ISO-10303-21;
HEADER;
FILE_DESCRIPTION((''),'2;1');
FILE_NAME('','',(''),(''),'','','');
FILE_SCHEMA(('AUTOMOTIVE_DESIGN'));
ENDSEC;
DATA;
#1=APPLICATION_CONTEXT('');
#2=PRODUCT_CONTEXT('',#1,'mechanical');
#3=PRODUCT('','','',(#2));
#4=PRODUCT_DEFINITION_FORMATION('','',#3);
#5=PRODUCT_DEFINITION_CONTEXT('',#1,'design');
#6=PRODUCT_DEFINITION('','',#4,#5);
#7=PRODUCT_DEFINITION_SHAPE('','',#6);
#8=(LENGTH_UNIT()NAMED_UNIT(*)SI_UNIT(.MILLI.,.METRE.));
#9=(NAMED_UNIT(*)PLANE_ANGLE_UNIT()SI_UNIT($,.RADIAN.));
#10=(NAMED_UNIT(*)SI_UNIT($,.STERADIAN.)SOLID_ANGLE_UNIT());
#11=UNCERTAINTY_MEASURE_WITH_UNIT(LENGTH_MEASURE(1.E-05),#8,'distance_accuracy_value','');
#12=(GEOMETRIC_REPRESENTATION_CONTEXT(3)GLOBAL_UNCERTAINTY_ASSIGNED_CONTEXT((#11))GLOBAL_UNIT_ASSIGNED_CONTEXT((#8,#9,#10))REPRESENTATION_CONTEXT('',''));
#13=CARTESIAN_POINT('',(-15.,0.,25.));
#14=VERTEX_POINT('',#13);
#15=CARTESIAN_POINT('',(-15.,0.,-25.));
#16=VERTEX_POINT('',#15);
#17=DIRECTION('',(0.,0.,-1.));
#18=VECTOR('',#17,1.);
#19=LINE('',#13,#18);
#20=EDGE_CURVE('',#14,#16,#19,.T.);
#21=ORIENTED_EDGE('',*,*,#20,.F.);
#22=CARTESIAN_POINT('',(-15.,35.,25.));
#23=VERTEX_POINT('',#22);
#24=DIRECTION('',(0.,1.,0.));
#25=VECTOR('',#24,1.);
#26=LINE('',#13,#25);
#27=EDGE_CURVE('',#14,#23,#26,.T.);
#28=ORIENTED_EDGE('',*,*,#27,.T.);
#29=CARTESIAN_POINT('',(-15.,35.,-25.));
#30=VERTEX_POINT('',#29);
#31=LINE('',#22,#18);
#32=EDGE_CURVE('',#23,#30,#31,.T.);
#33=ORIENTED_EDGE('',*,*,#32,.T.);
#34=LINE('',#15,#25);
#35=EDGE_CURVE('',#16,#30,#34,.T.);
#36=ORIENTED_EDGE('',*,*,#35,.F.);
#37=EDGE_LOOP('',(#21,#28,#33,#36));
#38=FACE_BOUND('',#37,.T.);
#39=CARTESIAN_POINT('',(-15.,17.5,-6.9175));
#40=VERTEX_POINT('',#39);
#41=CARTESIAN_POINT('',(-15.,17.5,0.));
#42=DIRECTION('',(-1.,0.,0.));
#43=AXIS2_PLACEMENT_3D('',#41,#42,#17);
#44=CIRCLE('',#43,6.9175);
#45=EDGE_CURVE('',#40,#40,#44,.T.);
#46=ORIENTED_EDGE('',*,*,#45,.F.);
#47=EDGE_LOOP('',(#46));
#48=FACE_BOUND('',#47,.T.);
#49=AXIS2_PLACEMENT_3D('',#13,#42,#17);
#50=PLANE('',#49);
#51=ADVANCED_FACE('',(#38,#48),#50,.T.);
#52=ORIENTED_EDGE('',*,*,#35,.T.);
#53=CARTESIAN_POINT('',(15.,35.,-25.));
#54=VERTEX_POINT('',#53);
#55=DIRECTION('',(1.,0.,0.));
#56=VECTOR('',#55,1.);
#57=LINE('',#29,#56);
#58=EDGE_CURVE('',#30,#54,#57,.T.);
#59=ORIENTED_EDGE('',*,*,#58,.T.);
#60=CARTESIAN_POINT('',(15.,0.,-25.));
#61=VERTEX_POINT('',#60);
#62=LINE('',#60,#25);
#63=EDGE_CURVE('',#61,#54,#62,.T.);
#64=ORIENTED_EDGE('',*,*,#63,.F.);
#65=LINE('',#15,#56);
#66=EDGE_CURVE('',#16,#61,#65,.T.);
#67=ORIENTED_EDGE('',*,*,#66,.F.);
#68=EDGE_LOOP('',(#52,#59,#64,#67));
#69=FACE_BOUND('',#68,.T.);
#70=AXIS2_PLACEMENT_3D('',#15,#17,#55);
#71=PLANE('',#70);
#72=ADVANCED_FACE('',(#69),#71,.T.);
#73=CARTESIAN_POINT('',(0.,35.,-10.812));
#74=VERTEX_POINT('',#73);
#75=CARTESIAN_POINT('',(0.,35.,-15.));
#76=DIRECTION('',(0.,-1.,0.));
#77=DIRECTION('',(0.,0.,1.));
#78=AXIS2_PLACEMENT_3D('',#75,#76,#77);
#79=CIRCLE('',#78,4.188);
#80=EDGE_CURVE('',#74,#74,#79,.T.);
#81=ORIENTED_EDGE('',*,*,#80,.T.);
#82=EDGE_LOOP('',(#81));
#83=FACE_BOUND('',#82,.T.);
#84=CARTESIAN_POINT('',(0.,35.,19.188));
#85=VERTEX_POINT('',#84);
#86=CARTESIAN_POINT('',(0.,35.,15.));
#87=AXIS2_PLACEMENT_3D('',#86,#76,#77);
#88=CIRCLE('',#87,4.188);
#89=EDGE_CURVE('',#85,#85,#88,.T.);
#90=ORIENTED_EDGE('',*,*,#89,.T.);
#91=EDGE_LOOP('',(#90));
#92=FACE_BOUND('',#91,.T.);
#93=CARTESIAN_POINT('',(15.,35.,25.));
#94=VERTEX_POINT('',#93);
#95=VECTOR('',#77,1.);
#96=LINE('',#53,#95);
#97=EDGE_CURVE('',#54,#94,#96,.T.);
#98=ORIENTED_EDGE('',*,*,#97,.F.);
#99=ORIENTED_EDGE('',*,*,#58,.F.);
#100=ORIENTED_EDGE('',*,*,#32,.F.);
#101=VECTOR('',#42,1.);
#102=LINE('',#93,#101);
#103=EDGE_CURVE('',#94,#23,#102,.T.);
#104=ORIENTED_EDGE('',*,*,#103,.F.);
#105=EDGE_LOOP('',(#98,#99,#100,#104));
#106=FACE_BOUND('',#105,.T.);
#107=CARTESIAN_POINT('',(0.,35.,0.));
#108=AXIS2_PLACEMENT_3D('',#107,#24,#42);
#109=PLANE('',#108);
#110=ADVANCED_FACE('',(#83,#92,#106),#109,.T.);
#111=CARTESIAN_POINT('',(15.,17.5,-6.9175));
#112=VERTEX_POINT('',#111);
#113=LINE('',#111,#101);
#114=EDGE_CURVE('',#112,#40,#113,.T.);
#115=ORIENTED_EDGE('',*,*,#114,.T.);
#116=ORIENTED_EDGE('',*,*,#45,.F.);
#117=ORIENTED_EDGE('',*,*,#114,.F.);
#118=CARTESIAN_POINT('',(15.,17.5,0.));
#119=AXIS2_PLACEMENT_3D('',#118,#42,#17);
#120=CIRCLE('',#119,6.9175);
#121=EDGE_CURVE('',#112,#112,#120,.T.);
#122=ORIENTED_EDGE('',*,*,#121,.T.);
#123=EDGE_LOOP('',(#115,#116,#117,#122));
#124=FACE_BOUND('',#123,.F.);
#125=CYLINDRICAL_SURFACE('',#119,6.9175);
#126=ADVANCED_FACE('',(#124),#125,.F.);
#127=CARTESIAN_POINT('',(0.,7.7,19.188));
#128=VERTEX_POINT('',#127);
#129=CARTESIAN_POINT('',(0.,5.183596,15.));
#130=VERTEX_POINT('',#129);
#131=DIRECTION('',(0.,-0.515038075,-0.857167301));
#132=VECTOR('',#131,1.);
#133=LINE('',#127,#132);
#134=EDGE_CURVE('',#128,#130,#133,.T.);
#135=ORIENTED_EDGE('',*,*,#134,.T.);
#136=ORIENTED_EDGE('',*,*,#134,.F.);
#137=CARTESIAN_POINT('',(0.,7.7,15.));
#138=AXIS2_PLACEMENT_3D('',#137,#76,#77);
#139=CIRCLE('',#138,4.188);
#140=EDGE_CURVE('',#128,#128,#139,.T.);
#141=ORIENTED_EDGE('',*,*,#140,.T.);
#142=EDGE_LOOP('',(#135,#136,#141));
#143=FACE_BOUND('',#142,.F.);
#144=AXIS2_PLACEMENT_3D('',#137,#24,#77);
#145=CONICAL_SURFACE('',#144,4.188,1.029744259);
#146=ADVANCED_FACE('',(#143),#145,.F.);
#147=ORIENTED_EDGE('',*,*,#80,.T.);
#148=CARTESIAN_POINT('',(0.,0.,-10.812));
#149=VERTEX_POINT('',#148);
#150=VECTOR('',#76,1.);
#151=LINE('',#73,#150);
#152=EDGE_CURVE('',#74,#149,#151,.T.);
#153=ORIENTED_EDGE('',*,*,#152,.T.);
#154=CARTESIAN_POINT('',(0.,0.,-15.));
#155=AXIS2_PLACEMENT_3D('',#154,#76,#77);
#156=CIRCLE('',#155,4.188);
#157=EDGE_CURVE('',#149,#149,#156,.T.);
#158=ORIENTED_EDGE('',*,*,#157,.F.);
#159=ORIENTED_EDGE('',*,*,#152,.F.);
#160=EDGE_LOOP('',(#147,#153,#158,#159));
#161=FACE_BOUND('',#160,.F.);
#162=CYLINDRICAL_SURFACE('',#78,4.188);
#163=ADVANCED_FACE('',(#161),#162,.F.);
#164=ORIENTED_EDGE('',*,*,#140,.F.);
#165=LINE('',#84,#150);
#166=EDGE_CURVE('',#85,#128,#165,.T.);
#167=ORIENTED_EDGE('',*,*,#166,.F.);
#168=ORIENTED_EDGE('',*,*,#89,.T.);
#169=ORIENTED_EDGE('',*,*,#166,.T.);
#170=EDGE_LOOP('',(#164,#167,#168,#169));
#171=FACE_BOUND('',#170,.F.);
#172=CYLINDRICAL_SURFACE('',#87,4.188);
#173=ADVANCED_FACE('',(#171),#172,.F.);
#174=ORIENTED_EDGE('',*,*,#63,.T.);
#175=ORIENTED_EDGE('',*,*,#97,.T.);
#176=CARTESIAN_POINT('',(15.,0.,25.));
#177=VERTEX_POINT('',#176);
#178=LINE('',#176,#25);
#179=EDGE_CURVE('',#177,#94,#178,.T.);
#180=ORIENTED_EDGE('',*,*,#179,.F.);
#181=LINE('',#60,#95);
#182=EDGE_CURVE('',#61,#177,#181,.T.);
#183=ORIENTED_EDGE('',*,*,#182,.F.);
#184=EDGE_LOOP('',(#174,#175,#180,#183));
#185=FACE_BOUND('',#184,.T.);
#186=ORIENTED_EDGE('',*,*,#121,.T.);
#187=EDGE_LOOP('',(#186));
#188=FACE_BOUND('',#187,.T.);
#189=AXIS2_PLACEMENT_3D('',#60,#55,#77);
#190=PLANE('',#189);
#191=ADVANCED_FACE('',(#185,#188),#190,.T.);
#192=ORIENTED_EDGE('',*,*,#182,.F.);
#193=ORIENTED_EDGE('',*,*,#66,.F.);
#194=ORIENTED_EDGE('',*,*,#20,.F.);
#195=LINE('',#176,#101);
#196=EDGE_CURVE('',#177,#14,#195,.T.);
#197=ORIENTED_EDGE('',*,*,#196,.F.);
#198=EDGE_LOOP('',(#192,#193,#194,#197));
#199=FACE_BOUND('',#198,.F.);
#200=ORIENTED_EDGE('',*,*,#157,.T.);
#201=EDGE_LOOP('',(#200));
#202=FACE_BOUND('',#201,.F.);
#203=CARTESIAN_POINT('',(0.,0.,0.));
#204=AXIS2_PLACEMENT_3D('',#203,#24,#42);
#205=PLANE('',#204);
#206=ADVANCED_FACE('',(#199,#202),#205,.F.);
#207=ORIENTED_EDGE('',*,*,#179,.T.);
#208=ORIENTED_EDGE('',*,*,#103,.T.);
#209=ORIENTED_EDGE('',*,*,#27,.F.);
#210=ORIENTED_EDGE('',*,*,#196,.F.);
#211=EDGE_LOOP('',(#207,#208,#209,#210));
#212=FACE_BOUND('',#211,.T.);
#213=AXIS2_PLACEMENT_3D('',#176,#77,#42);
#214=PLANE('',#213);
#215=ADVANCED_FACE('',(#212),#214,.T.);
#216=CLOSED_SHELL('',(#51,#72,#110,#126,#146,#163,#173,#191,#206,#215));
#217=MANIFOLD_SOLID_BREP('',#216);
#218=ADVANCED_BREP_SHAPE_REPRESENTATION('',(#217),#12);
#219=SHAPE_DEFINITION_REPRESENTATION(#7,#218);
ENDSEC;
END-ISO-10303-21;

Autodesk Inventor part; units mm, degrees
ref_plane "YZ Plane" through (0, 0, 0) normal (1, 0, 0) x (0, 1, 0)
ref_plane "XZ Plane" through (0, 0, 0) normal (0, 1, 0) x (-1, 0, 0)
ref_plane "XY Plane" through (0, 0, 0) normal (0, 0, 1) x (1, 0, 0)
sketch "Esboço1" plane through (0, 0, 0) normal (0, 1, 0) x (-1, 0, 0)
  line L0 (15, -25) -> (-15, -25)
  line L1 (-15, -25) -> (-15, 25)
  line L2 (-15, 25) -> (15, 25)
  line L3 (15, 25) -> (15, -25)
  line L4 (15, -25) -> (-15, 25) construction
  line L5 (-15, -25) -> (15, 25) construction
  point P0 (0, 0)
  dimension "d0" = 30
  dimension "d1" = 50
extrude "Extrusão1" add sketch "Esboço1" along normal blind 35
sketch "Esboço3" plane through (0, 35, 0) normal (0, 1, 0) x (1, 0, 0)
  line L0 (-15, -25) -> (15, -25) projected
  line L1 (-15, 25) -> (-15, -25) projected
  point P0 (0, 0)
  point P1 (0, -15)
  dimension "d4" = 10
  dimension "d5" = 15
hole "Furo1" at (0, 35, 15) direction (0, -1, 0) diameter 8.376 depth 27.3 tip angle 118 thread size "M10x1.5" class "6H" standard "ISO Metric profile"
sketch "Esboço4" plane through (0, 35, 0) normal (0, 1, 0) x (1, 0, 0)
  line L0 (15, 25) -> (-15, 25) projected
  line L1 (-15, 25) -> (-15, -25) projected
  point P0 (0, 0)
  point P1 (0, 15)
  dimension "d13" = 10
  dimension "d14" = 15
hole "Furo2" at (0, 35, -15) direction (0, -1, 0) diameter 8.376 end through all thread size "M10x1.5" class "6H" standard "ISO Metric profile"
sketch "Esboço5" plane through (15, 0, 25) normal (1, 0, 0) x (0, 0, -1)
  line L0 (0, 0) -> (0, 35) projected
  line L1 (0, 35) -> (50, 35) projected
  point P0 (25, 0)
  point P1 (25, 17.5)
  dimension "d22" = 25
  dimension "d23" = 17.5
hole "Furo3" at (15, 17.5, 0) direction (-1, 0, 0) diameter 13.835 end through all thread size "M16x2" class "6H" standard "ISO Metric profile"
properties part number "3D Model"
